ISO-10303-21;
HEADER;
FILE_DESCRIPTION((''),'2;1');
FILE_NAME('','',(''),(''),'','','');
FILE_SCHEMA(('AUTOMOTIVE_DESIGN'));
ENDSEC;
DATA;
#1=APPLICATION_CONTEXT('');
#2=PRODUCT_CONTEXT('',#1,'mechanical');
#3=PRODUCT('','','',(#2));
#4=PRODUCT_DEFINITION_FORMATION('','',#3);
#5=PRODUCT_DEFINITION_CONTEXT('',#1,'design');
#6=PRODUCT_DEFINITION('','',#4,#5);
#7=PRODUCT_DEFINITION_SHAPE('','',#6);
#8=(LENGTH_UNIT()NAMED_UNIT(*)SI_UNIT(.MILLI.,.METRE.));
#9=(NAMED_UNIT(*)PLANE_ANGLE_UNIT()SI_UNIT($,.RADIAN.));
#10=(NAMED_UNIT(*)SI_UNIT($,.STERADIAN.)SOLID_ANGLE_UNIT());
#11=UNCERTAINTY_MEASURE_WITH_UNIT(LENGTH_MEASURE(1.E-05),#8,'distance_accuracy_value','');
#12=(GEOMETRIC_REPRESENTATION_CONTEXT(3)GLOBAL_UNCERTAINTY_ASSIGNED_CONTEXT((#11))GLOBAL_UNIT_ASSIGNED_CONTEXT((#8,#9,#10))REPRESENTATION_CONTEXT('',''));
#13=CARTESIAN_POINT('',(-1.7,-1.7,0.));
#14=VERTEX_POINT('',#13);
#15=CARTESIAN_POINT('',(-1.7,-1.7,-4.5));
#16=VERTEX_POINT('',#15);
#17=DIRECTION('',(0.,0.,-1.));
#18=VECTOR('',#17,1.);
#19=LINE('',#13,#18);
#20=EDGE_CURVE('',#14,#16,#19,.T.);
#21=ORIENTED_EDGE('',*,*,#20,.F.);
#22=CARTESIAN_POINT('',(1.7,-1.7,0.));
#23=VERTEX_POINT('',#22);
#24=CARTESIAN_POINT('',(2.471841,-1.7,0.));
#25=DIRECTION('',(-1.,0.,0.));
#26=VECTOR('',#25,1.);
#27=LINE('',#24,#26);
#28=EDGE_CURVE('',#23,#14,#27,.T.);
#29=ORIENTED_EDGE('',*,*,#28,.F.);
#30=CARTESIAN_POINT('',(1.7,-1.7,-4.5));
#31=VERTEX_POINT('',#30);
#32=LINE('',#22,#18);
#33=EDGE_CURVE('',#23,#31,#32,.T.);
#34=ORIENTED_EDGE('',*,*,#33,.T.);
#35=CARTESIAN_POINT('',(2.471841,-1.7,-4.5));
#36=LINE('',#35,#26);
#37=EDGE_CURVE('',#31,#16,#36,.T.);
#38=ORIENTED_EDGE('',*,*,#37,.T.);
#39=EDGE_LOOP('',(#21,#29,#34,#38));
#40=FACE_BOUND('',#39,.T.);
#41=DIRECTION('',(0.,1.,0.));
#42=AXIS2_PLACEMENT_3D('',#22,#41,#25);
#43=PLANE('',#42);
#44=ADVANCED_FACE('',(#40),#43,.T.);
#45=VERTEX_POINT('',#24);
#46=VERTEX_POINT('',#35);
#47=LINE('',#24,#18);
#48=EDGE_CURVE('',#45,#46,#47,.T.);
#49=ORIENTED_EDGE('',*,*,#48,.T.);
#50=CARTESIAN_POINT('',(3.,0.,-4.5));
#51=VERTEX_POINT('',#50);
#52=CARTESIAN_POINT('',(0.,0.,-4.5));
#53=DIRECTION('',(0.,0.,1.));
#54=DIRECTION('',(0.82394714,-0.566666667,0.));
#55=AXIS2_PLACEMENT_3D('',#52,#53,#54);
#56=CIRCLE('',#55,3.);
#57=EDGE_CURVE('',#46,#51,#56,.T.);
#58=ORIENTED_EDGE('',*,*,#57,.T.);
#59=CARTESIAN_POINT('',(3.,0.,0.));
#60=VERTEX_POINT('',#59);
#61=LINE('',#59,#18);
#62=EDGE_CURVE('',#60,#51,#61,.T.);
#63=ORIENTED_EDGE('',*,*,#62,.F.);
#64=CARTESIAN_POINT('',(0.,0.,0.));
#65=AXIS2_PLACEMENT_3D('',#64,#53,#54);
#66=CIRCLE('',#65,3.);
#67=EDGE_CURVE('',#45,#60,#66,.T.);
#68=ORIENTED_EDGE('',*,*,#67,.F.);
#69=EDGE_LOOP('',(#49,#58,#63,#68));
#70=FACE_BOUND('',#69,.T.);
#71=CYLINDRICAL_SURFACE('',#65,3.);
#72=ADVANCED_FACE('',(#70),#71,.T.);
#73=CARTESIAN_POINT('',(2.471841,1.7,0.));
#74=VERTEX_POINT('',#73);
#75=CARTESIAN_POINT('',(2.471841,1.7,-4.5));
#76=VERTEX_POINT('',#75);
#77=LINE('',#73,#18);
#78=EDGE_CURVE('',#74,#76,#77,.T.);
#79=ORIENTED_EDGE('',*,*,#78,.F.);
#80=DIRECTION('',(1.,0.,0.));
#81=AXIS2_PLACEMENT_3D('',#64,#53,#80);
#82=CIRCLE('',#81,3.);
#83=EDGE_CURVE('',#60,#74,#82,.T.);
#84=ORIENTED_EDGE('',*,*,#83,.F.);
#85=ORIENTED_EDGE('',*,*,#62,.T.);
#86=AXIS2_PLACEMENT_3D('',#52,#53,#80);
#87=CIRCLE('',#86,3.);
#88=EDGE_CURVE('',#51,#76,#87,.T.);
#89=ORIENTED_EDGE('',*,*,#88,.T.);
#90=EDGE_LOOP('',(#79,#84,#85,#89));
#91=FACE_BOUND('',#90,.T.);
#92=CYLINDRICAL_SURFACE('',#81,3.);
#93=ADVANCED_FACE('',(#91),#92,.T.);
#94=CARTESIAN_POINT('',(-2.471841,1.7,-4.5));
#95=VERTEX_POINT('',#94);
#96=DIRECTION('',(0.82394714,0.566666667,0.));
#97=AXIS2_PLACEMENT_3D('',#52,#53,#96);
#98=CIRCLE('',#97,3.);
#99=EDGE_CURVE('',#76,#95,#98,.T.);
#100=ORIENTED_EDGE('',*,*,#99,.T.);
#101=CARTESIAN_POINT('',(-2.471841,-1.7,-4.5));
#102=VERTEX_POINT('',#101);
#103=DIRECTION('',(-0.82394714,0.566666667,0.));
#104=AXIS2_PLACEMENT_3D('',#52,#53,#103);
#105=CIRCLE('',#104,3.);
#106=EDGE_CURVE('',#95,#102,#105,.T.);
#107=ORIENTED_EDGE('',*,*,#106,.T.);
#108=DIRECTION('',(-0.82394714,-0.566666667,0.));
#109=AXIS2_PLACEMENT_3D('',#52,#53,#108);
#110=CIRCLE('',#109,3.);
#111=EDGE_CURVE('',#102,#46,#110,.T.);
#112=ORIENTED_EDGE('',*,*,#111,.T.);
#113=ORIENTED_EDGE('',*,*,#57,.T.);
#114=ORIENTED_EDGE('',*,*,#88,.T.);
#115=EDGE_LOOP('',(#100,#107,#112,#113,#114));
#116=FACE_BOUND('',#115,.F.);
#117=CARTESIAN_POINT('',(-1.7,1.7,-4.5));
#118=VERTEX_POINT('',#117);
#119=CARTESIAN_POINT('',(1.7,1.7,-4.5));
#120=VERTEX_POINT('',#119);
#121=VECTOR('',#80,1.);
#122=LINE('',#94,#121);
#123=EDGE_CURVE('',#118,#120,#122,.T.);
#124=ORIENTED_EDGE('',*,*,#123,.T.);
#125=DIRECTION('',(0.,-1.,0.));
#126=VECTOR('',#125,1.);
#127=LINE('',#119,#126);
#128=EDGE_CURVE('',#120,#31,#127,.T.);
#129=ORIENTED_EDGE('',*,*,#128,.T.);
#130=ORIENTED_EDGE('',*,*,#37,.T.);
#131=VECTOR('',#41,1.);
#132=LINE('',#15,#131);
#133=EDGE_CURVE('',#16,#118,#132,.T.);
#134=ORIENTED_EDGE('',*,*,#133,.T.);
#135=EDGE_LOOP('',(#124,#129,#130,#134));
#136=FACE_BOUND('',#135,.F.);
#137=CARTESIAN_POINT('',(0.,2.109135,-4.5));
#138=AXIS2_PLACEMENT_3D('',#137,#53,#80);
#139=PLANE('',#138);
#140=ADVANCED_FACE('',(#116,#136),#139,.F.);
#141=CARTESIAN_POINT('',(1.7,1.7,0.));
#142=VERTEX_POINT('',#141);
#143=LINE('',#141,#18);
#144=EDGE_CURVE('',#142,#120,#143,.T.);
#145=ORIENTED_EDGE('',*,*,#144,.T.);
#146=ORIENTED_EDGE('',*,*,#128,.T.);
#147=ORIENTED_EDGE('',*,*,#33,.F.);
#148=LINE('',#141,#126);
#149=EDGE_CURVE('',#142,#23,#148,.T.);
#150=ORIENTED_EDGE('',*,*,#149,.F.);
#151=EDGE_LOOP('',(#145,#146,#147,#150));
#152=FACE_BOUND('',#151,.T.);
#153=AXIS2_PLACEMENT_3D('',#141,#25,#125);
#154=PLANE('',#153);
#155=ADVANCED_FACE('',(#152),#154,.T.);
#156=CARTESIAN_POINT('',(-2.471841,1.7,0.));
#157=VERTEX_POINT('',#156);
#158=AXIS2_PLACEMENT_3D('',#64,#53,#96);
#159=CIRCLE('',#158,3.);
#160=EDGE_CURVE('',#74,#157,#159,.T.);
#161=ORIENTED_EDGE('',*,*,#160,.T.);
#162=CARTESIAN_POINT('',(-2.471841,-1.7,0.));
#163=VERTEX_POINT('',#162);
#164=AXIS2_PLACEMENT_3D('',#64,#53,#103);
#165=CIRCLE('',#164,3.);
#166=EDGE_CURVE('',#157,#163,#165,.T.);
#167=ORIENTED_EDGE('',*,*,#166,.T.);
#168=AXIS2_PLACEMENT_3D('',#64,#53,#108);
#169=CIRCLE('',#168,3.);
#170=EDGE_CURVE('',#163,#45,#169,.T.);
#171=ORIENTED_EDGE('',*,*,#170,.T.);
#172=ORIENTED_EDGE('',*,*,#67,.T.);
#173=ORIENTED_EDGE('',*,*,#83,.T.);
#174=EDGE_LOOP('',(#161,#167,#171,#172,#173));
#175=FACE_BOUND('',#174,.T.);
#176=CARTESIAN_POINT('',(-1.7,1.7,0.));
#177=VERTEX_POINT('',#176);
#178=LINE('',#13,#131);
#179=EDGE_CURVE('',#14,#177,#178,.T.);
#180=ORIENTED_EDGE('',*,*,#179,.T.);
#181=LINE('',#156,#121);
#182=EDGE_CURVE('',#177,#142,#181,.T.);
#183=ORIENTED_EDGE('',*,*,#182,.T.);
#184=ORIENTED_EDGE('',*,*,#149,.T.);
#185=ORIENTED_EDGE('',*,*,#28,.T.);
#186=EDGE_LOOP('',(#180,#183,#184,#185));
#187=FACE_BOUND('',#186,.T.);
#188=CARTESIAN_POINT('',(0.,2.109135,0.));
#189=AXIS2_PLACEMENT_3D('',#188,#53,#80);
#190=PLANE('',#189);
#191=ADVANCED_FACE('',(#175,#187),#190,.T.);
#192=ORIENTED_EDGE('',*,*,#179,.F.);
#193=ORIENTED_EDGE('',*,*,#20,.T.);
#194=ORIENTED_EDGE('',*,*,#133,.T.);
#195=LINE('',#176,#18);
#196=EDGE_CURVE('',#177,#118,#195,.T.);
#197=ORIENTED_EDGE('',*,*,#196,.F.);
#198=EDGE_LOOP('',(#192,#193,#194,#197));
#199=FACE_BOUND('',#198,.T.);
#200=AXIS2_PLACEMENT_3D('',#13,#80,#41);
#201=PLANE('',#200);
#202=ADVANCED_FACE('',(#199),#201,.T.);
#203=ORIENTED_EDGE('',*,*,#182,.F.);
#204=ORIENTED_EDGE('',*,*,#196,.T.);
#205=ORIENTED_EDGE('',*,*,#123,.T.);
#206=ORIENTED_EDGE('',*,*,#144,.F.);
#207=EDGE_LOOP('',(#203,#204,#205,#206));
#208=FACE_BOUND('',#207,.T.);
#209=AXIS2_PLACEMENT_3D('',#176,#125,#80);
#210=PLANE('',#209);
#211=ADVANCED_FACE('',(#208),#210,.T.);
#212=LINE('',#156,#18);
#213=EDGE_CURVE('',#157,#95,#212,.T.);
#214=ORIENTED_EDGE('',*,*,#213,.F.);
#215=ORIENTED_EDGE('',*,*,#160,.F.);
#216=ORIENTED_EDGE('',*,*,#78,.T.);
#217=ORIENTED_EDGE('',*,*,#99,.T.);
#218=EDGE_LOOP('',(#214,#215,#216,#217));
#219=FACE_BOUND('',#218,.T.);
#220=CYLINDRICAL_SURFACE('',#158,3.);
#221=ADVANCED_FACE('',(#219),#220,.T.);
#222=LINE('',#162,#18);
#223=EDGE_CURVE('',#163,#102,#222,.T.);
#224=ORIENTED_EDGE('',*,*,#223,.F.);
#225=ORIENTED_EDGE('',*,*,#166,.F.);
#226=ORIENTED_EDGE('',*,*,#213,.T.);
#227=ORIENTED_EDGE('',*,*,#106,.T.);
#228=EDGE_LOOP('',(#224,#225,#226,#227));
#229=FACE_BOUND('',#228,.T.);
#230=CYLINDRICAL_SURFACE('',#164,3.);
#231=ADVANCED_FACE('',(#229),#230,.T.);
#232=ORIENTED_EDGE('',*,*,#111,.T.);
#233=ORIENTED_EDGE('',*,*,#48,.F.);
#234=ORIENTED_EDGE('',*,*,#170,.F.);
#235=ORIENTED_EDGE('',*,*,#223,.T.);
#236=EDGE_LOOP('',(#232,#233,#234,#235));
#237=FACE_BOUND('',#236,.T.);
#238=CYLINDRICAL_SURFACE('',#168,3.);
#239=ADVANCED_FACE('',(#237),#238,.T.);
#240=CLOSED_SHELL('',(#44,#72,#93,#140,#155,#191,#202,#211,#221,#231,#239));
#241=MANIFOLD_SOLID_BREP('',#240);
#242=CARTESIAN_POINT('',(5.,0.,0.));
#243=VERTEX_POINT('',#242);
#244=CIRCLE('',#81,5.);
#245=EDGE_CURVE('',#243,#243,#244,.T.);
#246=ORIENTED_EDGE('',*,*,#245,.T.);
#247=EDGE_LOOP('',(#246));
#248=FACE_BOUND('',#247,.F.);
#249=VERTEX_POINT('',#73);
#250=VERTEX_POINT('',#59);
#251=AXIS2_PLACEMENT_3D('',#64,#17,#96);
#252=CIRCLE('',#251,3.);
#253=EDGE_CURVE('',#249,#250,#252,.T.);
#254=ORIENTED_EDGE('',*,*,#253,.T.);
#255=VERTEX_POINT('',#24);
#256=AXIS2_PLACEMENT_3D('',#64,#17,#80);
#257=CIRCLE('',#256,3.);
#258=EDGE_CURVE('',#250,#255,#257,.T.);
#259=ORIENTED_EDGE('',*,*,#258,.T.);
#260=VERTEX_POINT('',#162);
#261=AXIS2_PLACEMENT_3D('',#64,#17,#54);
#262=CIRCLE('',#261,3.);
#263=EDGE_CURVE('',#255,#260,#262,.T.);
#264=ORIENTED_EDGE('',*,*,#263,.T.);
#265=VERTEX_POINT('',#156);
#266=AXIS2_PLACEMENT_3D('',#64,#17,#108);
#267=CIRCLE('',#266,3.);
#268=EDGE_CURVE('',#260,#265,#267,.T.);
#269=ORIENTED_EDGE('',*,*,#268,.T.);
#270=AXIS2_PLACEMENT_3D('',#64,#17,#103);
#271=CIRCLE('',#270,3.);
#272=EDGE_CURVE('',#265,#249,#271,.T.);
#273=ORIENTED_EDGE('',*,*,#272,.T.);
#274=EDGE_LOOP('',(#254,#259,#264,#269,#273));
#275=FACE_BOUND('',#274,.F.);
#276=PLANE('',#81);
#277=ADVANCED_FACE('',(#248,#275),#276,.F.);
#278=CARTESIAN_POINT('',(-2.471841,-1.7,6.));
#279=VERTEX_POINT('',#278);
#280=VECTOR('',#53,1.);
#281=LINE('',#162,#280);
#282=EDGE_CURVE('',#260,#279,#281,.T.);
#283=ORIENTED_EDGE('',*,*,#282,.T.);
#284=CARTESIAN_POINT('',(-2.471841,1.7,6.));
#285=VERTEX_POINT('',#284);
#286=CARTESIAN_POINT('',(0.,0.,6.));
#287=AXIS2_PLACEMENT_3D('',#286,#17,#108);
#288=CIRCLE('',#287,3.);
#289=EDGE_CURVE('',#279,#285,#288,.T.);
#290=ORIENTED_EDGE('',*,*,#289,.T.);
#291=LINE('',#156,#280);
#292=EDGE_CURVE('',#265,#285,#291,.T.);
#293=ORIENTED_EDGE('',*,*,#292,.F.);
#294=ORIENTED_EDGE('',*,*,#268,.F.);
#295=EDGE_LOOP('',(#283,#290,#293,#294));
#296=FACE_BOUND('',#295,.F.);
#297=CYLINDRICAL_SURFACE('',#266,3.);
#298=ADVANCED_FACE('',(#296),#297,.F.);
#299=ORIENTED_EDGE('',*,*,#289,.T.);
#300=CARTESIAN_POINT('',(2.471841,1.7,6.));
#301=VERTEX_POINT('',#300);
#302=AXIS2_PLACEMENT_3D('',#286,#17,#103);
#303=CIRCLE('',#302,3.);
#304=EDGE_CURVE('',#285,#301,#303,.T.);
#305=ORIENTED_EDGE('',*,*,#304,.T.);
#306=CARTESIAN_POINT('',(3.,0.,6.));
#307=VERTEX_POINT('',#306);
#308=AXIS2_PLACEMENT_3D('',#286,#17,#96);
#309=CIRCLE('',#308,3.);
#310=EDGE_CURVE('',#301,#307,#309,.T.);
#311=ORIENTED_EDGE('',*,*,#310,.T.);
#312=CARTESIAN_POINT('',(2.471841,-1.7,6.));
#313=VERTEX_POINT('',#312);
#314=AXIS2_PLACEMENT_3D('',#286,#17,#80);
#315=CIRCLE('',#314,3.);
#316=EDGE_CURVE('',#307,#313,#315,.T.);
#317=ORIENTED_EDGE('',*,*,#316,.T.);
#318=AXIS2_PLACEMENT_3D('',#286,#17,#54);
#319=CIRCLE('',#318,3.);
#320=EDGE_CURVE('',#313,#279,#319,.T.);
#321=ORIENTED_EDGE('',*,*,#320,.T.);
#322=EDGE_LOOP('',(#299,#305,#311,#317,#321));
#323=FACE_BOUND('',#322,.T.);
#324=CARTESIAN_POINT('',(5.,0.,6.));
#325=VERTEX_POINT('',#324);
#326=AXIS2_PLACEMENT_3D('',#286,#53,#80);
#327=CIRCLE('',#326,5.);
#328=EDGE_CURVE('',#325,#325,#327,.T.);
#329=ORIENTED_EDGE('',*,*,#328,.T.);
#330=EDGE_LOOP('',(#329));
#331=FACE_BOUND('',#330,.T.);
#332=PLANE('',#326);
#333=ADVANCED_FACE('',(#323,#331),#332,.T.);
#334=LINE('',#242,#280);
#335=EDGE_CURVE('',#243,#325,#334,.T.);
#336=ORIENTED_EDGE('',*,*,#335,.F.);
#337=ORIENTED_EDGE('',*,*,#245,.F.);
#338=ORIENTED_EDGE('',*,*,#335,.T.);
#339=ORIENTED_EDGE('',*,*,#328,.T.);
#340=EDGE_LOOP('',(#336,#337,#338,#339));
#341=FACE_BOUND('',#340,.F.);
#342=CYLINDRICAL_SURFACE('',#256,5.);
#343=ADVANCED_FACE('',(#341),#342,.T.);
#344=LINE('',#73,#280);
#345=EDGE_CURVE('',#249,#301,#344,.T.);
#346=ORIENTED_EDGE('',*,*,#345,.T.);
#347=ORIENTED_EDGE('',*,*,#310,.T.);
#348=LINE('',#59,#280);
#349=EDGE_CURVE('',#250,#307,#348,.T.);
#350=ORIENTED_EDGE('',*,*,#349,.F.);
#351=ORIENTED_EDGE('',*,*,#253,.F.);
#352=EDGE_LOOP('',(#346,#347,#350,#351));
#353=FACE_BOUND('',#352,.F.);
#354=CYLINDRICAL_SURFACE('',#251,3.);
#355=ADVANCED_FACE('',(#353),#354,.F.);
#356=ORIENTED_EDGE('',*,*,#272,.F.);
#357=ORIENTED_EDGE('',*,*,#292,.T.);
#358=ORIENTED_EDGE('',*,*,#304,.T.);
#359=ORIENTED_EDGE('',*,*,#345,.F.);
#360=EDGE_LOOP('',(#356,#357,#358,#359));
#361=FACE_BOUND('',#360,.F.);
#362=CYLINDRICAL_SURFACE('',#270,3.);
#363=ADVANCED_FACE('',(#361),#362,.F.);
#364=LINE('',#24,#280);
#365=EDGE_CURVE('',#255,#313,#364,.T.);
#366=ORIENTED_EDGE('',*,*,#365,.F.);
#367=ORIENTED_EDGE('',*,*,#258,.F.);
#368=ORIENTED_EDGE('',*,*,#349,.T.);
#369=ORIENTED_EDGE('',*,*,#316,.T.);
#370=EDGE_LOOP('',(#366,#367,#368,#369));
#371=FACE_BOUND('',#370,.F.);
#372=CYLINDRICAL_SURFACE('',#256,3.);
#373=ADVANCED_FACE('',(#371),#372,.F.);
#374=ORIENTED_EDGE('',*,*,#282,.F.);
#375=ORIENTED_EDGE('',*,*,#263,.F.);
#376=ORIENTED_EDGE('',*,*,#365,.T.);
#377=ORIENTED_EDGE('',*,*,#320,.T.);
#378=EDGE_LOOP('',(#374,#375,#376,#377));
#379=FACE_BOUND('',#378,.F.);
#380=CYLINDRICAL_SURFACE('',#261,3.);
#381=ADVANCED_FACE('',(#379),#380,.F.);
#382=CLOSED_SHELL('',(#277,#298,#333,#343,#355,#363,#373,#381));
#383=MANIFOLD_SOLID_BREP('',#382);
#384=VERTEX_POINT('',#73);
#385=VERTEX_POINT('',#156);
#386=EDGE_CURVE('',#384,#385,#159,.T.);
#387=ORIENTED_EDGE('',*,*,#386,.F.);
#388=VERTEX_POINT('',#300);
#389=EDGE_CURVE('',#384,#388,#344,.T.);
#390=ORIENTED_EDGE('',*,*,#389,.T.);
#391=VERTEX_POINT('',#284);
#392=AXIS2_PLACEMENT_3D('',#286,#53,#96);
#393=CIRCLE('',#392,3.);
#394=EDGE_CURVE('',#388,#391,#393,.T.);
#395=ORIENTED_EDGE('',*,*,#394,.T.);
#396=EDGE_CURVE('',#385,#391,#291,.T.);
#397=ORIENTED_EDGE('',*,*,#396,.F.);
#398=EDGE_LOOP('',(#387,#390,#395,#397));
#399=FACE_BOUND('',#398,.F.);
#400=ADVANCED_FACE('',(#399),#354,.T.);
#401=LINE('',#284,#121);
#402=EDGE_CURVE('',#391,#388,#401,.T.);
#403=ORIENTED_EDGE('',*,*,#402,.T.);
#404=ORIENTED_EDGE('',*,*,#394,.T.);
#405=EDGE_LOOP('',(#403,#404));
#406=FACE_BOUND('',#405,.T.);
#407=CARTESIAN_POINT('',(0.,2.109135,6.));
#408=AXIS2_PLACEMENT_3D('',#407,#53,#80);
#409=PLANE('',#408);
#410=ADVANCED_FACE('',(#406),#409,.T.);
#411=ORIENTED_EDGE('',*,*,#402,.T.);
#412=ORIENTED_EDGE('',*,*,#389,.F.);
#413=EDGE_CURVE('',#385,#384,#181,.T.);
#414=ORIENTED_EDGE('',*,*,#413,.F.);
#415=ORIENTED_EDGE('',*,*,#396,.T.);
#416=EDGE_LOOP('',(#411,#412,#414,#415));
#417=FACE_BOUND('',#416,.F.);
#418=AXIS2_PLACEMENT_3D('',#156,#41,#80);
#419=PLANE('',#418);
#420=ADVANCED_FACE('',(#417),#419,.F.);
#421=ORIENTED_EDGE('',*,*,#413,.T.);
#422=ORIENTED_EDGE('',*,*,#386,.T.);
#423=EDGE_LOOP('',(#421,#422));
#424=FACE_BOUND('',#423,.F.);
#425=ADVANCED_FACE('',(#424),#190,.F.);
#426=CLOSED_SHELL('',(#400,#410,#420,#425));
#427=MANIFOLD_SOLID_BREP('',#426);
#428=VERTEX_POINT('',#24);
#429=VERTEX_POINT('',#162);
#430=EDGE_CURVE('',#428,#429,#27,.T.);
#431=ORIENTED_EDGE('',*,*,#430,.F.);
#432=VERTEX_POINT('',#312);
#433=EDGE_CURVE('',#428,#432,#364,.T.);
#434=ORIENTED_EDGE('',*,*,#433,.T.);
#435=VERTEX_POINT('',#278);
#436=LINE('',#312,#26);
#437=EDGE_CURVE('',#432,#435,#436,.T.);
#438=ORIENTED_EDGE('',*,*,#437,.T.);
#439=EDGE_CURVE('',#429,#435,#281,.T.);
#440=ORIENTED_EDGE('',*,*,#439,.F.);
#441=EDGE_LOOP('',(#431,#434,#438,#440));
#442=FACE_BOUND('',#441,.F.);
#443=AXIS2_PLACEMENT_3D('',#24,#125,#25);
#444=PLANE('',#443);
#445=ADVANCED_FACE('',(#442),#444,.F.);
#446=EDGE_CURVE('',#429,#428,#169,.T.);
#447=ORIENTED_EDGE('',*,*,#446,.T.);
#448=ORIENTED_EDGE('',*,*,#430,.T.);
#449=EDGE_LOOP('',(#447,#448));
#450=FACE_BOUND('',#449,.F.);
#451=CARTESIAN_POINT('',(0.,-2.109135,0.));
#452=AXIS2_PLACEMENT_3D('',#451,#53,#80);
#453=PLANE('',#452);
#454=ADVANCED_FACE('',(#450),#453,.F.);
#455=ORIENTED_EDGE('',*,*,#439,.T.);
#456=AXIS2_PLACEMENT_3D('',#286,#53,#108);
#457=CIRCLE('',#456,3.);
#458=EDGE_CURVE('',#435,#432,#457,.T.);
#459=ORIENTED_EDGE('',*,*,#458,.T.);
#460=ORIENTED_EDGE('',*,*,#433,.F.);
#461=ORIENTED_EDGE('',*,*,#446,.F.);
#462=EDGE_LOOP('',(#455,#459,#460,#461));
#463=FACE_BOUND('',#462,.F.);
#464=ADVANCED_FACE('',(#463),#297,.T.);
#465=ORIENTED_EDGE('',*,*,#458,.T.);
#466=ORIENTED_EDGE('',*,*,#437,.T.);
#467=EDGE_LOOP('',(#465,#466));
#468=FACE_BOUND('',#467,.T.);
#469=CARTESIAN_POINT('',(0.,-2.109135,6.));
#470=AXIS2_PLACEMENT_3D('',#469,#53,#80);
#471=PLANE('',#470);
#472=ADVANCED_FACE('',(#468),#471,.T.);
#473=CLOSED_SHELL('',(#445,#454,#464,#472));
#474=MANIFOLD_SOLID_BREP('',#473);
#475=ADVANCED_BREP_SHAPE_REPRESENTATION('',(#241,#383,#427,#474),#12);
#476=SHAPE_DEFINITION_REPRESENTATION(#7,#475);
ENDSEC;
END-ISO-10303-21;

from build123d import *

# Parameters (mm, degrees)
F1_DEPTH = 4.5
F0_R     = 5
F2_DEPTH = 6
F3_DEPTH = 6
F4_DEPTH = 6


with BuildPart() as f1:
    # F0 (on Top) → F1 (new body)
    with BuildSketch(Plane.XY):
        with BuildLine():
            Line((1.7, 1.7), (2.4718414189, 1.7))
            ThreePointArc((2.4718414189, 1.7), (0, 3), (-2.4718414189, 1.7))
            Line((-2.4718414189, 1.7), (-1.7, 1.7))
            Line((-1.7, 1.7), (1.7, 1.7))
        make_face()
        with BuildLine():
            Line((-1.7, 1.7), (-2.4718414189, 1.7))
            ThreePointArc((-2.4718414189, 1.7), (-3, 0), (-2.4718414189, -1.7))
            Line((-2.4718414189, -1.7), (-1.7, -1.7))
            Line((-1.7, -1.7), (-1.7, 1.7))
        make_face()
        with BuildLine():
            ThreePointArc((-2.4718414189, -1.7), (0, -3), (2.4718414189, -1.7))
            Line((2.4718414189, -1.7), (1.7, -1.7))
            Line((1.7, -1.7), (-1.7, -1.7))
            Line((-1.7, -1.7), (-2.4718414189, -1.7))
        make_face()
        with BuildLine():
            ThreePointArc((2.4718414189, -1.7), (2.8649192185, -0.8900774526), (3, 0))
            ThreePointArc((3, 0), (2.8649192185, 0.8900774526), (2.4718414189, 1.7))
            Line((2.4718414189, 1.7), (1.7, 1.7))
            Line((1.7, 1.7), (1.7, -1.7))
            Line((1.7, -1.7), (2.4718414189, -1.7))
        make_face()
    extrude(amount=-F1_DEPTH)


with BuildPart() as f2:
    # F0 (on Top) → F2 (new body)
    with BuildSketch(Plane.XY):
        Circle(F0_R)
        with BuildLine():
            ThreePointArc((2.4718414189, 1.7), (2.8649192185, 0.8900774526), (3, 0))
            ThreePointArc((3, 0), (2.8649192185, -0.8900774526), (2.4718414189, -1.7))
            ThreePointArc((2.4718414189, -1.7), (0, -3), (-2.4718414189, -1.7))
            ThreePointArc((-2.4718414189, -1.7), (-3, 0), (-2.4718414189, 1.7))
            ThreePointArc((-2.4718414189, 1.7), (0, 3), (2.4718414189, 1.7))
        make_face(mode=Mode.SUBTRACT)
    extrude(amount=F2_DEPTH)


with BuildPart() as f3:
    # F0 (on Top) → F3 (new body)
    with BuildSketch(Plane.XY):
        with BuildLine():
            Line((1.7, 1.7), (2.4718414189, 1.7))
            ThreePointArc((2.4718414189, 1.7), (0, 3), (-2.4718414189, 1.7))
            Line((-2.4718414189, 1.7), (-1.7, 1.7))
            Line((-1.7, 1.7), (1.7, 1.7))
        make_face()
    extrude(amount=F3_DEPTH)


with BuildPart() as f4:
    # F0 (on Top) → F4 (new body)
    with BuildSketch(Plane.XY):
        with BuildLine():
            ThreePointArc((-2.4718414189, -1.7), (0, -3), (2.4718414189, -1.7))
            Line((2.4718414189, -1.7), (1.7, -1.7))
            Line((1.7, -1.7), (-1.7, -1.7))
            Line((-1.7, -1.7), (-2.4718414189, -1.7))
        make_face()
    extrude(amount=F4_DEPTH)


solid = Compound([f1.part, f2.part, f3.part, f4.part])
